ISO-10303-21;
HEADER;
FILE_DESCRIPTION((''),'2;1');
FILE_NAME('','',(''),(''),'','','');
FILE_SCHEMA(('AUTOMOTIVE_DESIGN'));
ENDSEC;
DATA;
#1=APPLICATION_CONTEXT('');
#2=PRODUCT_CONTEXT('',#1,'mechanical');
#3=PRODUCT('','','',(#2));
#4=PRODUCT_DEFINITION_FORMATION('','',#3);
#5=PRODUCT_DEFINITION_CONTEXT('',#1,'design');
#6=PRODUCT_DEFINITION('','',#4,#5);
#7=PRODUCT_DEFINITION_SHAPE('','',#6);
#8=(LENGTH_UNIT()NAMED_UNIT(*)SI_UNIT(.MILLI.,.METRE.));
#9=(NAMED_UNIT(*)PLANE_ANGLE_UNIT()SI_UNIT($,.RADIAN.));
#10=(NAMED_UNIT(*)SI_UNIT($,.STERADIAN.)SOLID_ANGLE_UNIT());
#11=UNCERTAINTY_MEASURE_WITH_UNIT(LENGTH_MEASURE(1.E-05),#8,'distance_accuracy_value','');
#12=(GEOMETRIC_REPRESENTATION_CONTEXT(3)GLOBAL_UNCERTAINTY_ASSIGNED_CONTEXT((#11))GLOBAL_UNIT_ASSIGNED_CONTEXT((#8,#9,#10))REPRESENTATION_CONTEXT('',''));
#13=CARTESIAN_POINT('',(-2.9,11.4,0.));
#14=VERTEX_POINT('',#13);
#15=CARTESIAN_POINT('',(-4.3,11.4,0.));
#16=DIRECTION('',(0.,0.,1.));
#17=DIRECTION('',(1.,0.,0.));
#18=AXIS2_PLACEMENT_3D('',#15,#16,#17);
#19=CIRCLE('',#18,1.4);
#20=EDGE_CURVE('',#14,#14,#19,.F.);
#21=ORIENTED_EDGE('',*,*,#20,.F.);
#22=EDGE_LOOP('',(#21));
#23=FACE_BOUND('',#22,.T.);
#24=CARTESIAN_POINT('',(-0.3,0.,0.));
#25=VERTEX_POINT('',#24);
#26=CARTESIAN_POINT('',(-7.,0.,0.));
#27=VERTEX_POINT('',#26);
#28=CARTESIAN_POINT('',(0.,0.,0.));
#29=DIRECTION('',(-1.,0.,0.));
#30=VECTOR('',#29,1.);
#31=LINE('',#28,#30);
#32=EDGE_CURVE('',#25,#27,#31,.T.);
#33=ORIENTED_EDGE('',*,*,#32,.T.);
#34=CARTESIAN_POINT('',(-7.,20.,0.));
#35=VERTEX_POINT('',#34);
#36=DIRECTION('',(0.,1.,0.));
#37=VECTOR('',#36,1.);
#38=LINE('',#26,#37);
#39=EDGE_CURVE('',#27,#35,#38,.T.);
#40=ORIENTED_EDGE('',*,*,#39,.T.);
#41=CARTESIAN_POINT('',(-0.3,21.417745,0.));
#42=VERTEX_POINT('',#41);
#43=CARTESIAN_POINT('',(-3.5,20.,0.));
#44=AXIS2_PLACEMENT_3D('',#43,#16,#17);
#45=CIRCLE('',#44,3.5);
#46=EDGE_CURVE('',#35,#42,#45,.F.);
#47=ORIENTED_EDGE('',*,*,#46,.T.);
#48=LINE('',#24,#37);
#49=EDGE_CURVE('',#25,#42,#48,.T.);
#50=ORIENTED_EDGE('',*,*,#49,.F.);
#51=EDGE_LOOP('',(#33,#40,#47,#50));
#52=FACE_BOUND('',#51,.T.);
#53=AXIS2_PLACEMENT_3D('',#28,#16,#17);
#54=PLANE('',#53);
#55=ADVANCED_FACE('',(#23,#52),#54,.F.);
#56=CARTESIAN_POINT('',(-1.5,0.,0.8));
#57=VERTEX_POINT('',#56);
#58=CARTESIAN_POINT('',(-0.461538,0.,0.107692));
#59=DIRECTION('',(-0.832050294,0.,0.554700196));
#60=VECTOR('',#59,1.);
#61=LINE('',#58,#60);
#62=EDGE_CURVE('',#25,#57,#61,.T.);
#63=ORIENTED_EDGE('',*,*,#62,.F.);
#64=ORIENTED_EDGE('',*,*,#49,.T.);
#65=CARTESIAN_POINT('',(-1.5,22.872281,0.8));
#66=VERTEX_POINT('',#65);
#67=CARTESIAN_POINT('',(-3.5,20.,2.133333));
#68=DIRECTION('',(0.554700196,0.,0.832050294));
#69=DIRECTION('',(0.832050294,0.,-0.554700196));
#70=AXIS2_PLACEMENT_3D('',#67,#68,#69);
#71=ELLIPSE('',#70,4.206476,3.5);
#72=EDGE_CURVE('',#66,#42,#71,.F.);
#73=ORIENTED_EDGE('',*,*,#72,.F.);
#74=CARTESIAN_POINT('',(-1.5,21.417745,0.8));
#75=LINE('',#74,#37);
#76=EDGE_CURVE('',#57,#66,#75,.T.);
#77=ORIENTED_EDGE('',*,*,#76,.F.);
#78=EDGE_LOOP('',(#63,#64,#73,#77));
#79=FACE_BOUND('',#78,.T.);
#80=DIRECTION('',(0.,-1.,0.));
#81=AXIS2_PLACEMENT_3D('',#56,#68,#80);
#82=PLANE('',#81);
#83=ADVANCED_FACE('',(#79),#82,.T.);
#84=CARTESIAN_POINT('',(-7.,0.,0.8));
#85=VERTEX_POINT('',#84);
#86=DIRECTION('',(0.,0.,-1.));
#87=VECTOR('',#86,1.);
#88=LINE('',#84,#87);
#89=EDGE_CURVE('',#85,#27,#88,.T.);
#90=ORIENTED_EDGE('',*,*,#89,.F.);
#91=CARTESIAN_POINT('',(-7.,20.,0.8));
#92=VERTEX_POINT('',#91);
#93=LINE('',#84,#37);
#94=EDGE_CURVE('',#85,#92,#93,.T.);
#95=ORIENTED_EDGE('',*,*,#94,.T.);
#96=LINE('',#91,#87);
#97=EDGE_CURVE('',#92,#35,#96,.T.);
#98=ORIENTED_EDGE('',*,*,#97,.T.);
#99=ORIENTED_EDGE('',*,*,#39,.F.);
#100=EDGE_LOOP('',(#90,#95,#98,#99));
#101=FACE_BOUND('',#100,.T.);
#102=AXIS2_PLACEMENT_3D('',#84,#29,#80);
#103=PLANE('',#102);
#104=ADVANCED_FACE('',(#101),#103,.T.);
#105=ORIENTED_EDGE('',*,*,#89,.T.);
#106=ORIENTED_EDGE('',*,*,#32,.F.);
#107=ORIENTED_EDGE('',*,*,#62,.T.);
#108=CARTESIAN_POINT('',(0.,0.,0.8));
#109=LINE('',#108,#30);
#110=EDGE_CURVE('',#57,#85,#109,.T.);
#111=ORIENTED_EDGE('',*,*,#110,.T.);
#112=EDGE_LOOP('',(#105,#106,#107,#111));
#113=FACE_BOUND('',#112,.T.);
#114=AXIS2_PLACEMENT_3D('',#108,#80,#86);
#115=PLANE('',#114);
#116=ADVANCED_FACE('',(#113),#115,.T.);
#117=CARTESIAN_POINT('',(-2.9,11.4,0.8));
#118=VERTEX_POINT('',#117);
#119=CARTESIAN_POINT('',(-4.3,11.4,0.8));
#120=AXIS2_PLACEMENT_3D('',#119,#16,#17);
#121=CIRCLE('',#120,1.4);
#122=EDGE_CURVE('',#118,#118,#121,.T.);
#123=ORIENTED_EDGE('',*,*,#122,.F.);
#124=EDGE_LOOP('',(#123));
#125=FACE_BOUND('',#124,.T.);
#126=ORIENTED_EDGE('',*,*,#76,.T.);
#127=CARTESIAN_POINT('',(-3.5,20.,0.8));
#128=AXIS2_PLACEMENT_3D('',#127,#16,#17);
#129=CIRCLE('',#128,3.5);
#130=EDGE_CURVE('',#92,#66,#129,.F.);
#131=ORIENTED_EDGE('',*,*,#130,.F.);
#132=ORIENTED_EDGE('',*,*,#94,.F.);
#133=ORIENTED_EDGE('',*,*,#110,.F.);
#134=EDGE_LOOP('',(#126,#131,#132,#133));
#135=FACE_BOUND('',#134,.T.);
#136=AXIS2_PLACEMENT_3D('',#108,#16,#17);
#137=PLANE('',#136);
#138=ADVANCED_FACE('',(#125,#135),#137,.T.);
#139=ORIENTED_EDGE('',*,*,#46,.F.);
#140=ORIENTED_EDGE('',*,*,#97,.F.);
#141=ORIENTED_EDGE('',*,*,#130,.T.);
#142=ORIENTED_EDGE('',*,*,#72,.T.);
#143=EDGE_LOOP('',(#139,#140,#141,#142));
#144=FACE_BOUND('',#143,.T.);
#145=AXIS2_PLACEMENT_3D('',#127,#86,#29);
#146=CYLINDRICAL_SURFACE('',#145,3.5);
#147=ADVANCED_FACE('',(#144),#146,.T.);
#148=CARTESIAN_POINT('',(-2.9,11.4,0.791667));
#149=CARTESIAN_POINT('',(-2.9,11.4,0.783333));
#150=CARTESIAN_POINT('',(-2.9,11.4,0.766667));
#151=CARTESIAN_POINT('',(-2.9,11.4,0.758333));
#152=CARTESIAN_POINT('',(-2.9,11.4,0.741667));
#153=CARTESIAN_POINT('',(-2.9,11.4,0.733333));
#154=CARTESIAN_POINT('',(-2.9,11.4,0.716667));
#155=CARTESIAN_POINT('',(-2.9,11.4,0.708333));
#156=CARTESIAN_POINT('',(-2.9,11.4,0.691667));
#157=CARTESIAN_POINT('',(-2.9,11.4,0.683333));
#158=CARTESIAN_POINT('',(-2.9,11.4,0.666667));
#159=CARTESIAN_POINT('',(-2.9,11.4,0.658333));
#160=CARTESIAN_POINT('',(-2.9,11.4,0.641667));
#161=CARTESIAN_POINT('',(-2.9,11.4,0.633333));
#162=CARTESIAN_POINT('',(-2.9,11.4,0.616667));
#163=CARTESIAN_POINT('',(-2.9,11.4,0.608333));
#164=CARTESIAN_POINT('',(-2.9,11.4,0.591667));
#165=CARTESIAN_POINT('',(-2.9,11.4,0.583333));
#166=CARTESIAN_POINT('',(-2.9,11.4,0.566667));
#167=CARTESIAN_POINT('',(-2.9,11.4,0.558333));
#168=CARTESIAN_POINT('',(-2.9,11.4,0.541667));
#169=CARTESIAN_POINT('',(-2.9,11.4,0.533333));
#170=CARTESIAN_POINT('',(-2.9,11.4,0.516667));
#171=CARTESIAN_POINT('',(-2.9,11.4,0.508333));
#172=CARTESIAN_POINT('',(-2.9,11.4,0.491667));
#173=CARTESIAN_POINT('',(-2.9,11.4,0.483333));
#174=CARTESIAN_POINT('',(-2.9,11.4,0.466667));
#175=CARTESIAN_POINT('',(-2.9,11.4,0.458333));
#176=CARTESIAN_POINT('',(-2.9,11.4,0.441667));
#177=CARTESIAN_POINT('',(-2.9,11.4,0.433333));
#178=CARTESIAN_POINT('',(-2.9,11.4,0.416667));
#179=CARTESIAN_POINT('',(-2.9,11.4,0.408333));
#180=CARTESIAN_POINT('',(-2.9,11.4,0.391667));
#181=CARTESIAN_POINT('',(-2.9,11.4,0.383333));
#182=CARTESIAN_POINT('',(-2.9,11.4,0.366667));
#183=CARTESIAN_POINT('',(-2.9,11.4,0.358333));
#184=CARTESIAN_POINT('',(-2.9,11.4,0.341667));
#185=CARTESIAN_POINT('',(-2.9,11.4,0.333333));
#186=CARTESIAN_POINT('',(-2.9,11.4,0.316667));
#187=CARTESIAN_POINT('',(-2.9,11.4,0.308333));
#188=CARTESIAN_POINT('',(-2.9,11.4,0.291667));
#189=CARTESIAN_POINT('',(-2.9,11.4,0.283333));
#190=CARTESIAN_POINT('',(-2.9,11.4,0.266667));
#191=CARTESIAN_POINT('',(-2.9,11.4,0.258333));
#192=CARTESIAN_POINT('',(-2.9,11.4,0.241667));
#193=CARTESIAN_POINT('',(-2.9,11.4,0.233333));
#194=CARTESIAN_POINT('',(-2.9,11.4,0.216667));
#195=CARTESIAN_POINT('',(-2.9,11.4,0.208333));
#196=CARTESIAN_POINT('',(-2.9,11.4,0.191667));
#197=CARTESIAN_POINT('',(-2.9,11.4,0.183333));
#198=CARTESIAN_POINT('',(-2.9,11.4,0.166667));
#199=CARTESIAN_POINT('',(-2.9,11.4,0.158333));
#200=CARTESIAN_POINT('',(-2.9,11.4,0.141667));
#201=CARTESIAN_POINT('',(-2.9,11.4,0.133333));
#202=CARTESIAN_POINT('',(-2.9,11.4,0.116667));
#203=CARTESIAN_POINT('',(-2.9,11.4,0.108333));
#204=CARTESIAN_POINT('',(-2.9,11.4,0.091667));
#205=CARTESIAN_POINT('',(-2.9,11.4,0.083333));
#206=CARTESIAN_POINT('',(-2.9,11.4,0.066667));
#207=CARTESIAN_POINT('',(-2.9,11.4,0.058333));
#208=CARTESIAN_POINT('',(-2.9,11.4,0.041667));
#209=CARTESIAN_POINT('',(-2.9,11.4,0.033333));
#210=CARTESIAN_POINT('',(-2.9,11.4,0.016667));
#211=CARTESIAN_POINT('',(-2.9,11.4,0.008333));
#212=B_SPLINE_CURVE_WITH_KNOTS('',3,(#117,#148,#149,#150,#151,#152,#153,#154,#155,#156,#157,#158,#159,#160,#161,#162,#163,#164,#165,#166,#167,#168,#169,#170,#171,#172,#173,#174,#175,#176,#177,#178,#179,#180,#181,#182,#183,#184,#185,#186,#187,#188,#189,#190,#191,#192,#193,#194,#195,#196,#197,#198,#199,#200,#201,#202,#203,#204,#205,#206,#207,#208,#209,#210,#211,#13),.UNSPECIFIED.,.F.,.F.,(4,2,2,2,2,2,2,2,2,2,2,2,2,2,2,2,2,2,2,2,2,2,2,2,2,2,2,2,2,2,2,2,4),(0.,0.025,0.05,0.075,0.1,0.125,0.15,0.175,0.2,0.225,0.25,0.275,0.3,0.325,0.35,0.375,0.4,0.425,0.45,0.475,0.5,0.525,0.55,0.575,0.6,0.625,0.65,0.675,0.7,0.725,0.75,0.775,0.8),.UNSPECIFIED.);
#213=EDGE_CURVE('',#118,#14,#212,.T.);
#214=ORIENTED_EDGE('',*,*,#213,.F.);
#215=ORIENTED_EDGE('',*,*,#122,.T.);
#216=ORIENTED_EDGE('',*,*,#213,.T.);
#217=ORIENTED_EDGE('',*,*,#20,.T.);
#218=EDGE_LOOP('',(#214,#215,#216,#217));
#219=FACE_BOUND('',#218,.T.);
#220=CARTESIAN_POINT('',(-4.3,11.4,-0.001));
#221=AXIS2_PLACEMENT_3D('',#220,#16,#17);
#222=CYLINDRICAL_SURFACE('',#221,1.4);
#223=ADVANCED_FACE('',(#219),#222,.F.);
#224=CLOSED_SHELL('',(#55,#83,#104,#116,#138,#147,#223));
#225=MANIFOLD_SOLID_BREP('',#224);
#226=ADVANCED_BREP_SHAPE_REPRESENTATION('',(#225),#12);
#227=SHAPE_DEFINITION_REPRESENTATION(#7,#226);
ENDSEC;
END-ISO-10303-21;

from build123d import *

# Parameters (mm, degrees)
BOSS_EXTRUDE1_DEPTH = 0.8
CHAMFER1_SIZE       = 1.2
CHAMFER1_SIZE_2     = 0.8
CUT_EXTRUDE1_REACH  = 26.533
SKETCH5_R           = 1.4


with BuildPart() as part:
    # Sketch2 → Boss-Extrude1 (new body)
    with BuildSketch(Plane.XY):
        with BuildLine():
            Line((-7, 0), (-0.3, 0))
            Line((-0.3, 0), (-0.3, 20))
            Line((-0.3, 20), (-0.3, 21.417744688))
            ThreePointArc((-0.3, 21.417744688), (-4.224568837, 23.424178734), (-7, 20))
            Line((-7, 20), (-7, 0))
        make_face()
    extrude(amount=BOSS_EXTRUDE1_DEPTH)

    # Chamfer1
    # the kernel refuses this chamfer: 1.2, 0.8 mm, written as the material it takes off along each edge
    with BuildSketch(Plane(origin=(-0.3, 24.518305317, 0.8), x_dir=(-0.9997695277037822, 0, 0.021468383147227363), z_dir=(0, -1, 0))) as chamfer1_piece_1:
        Polygon((CHAMFER1_SIZE * 0.999769527704, CHAMFER1_SIZE * 0.0214683831472), (-CHAMFER1_SIZE_2 * 0.0214683831472, CHAMFER1_SIZE_2 * 0.999769527704), (0, 0), align=None)
    extrude(amount=27.618865945, mode=Mode.SUBTRACT)

    # Sketch5 → Cut-Extrude1 (cut, up to next)
    with BuildSketch(Plane.XY.offset(0.8), mode=Mode.PRIVATE) as cut_extrude1_sk1:
        with Locations((-4.3, 11.4)):
            Circle(SKETCH5_R)
    cut_extrude1_tool1 = extrude(cut_extrude1_sk1.sketch, amount=-CUT_EXTRUDE1_REACH, mode=Mode.PRIVATE) & part.part
    add(cut_extrude1_tool1.solids().sort_by_distance((-4.3, 11.4, 0.8))[0], mode=Mode.SUBTRACT)


solid = part.part
